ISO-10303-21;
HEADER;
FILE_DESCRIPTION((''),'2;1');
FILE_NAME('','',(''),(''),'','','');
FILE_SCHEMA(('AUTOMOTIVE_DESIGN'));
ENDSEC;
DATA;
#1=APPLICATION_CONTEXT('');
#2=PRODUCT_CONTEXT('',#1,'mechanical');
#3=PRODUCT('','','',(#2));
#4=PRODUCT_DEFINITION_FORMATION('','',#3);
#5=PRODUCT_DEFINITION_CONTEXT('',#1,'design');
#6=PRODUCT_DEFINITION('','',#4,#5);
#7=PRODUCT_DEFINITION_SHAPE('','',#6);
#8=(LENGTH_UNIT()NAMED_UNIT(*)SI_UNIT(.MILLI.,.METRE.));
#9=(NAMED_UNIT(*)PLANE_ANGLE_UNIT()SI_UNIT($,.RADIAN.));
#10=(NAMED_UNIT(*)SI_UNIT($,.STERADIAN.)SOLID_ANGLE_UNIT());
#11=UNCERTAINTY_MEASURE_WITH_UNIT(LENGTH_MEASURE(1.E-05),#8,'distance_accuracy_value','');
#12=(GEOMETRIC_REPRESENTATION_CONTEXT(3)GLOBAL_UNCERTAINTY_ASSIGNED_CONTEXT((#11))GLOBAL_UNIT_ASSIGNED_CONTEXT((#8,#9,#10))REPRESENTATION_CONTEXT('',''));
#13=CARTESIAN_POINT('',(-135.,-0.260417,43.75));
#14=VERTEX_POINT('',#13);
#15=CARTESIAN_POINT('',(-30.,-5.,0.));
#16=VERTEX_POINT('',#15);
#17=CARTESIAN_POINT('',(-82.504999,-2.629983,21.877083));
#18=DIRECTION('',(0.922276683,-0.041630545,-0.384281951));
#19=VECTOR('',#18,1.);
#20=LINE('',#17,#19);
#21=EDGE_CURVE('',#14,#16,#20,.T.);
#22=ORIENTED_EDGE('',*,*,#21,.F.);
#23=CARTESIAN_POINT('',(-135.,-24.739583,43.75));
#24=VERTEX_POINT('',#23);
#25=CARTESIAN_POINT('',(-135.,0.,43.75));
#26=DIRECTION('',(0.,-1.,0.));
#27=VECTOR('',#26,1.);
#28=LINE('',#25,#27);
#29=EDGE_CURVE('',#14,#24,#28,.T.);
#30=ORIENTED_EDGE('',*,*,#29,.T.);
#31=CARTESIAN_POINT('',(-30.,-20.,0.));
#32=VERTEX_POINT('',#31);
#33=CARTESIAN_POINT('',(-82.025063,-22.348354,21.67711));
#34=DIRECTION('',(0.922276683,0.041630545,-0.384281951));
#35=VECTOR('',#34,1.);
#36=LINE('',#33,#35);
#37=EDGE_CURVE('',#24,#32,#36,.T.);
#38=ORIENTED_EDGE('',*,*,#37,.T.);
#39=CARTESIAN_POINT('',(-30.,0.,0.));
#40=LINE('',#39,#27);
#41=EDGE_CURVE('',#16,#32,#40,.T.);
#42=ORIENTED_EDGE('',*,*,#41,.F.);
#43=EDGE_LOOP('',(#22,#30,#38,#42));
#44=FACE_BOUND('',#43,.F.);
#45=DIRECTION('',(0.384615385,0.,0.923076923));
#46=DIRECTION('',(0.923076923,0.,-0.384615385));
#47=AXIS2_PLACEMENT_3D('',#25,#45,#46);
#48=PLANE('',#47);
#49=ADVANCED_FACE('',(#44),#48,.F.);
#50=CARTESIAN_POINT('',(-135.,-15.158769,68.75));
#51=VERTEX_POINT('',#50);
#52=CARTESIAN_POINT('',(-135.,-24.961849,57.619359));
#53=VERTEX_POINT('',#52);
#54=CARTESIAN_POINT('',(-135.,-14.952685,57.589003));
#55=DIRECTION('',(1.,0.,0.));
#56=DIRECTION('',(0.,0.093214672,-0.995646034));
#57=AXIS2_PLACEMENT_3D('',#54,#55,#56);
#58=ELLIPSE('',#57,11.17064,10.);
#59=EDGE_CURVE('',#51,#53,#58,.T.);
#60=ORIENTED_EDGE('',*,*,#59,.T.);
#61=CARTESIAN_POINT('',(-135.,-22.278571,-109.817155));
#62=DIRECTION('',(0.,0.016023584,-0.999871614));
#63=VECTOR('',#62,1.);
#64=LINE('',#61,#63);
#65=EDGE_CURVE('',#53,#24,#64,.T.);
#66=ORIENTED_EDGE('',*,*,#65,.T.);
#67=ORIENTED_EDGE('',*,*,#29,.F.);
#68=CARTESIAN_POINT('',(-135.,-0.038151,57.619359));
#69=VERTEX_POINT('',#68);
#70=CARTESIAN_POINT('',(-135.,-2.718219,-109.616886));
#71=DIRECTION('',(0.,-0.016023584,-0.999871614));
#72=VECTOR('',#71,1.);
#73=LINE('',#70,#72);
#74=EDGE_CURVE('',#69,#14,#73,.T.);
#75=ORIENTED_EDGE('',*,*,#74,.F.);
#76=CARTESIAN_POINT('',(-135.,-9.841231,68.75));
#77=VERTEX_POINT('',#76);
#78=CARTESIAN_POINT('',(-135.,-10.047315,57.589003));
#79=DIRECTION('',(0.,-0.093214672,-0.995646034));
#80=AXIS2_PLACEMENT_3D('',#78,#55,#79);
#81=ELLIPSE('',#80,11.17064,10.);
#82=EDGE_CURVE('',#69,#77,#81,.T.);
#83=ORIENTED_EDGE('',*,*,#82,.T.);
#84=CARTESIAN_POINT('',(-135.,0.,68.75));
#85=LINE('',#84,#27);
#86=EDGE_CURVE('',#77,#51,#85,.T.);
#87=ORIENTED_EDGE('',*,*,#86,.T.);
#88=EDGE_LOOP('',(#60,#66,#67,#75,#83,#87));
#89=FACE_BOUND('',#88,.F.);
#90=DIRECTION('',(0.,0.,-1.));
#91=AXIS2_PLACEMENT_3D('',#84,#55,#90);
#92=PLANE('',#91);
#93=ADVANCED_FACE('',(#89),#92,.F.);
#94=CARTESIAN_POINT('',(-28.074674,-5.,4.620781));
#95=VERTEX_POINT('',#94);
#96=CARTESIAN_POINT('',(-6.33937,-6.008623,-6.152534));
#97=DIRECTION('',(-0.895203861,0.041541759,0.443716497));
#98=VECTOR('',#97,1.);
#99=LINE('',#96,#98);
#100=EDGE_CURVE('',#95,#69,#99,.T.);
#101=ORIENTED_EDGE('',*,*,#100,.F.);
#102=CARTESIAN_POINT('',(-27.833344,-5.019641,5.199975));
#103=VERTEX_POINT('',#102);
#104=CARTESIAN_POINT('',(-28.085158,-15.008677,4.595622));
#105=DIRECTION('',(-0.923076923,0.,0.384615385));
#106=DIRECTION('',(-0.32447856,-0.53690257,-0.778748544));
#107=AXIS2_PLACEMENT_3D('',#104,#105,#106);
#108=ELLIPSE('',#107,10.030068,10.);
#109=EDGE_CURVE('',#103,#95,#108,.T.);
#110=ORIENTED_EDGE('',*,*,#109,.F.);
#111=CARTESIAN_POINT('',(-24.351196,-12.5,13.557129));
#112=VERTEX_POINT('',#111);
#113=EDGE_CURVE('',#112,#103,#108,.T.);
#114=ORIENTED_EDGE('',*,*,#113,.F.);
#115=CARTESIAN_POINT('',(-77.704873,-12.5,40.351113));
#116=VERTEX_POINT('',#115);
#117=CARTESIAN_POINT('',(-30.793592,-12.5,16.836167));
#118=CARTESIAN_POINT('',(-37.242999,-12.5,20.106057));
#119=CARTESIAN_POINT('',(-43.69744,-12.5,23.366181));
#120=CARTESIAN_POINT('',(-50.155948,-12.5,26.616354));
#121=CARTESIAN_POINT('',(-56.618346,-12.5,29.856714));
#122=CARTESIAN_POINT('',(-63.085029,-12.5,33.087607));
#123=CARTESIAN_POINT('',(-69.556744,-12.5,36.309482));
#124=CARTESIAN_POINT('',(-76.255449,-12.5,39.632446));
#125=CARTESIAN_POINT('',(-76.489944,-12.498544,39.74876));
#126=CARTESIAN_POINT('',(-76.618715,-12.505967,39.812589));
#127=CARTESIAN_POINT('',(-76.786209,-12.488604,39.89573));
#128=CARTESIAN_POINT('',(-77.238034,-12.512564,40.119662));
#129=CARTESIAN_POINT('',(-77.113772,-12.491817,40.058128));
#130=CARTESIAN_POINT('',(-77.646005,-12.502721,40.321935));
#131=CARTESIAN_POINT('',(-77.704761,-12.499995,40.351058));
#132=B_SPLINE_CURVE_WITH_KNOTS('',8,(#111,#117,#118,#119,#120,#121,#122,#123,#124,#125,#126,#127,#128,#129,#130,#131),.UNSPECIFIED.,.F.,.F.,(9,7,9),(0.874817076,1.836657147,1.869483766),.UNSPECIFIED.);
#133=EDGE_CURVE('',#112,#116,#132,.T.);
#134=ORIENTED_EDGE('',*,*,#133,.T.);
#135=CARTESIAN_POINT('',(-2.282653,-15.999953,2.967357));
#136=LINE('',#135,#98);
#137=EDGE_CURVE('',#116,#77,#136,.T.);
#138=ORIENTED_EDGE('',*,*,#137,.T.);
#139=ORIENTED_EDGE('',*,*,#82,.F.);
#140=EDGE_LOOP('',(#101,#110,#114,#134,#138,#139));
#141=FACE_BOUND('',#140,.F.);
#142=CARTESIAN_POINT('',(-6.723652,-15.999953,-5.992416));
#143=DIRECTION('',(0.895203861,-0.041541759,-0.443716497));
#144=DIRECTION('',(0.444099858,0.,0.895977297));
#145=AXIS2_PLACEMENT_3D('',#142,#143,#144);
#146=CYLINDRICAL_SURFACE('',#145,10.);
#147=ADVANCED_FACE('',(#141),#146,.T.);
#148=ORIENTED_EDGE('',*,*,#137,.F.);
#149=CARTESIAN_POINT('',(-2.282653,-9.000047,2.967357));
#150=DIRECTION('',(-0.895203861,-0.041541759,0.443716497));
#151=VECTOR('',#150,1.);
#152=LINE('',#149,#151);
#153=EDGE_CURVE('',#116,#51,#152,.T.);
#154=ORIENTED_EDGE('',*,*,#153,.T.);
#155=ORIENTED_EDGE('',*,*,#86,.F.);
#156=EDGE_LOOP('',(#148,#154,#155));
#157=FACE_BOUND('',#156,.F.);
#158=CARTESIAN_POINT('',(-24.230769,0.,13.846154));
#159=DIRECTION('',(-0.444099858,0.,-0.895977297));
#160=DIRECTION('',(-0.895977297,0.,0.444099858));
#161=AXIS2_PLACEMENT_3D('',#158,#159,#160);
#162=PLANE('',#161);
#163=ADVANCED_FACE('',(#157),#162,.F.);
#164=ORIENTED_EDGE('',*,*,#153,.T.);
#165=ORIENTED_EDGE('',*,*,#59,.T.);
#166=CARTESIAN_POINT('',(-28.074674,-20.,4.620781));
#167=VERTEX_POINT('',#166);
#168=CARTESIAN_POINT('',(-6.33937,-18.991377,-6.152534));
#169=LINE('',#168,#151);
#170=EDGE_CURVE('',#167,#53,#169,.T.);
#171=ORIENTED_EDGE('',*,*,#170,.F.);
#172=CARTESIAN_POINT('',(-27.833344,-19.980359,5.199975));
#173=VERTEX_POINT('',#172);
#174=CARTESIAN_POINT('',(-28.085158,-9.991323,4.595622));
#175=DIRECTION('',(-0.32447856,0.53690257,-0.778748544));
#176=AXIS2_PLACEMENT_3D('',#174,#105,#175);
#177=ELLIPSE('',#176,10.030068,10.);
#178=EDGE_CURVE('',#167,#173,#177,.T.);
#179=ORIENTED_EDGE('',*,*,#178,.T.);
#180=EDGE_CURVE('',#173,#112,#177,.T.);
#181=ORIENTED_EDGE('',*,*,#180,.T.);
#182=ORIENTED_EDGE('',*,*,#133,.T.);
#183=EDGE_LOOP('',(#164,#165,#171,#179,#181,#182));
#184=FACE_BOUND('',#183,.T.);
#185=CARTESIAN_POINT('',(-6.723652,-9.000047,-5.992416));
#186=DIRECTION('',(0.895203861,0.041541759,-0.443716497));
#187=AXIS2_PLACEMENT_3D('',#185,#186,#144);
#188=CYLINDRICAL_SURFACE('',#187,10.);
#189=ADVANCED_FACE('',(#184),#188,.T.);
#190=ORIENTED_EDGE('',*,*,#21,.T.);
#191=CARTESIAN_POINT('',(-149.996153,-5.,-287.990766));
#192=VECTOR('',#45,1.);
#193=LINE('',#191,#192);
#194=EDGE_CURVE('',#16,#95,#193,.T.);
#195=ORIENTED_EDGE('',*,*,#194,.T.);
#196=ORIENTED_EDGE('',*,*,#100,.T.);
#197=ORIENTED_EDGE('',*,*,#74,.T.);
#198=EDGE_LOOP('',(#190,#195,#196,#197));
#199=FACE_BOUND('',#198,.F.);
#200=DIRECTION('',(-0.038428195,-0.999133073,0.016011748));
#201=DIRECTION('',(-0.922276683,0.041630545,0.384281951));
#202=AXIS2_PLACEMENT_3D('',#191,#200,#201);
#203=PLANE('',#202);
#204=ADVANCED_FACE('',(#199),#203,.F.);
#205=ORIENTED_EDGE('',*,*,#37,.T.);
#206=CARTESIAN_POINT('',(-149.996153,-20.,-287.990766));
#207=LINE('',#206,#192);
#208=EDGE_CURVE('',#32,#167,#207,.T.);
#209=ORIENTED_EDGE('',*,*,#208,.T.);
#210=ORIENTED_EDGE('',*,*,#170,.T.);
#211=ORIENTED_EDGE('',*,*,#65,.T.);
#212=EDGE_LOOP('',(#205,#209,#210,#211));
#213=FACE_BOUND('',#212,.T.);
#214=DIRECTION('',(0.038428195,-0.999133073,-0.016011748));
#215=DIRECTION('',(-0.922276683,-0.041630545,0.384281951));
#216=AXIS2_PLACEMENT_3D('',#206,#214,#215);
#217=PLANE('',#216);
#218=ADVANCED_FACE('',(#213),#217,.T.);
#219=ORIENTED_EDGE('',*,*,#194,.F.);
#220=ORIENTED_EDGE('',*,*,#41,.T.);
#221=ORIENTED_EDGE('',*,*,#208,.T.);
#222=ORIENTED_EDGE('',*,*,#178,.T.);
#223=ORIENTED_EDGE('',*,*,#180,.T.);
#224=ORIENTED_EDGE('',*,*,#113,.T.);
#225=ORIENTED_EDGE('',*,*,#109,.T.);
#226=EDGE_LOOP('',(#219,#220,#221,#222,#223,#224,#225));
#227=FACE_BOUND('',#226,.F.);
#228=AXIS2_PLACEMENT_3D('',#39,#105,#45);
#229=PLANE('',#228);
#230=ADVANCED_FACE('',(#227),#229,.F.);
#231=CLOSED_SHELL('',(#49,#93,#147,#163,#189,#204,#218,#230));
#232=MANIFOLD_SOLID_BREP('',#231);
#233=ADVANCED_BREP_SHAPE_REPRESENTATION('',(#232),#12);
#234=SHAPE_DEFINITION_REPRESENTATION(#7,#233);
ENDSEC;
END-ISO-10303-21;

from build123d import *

# Parameters (mm, degrees)
F1_DEPTH     = 25
F2_T1_DEPTH  = 638.9799936737
F3_T1_DEPTH  = 170.2250104198
F3_T3_DEPTH  = 170.2250104198
F3_T8_DEPTH  = 61.8334709535
F3_S9_R      = 10
F3_T10_DEPTH = 33
F3_T14_DEPTH = 61.8334709535
F3_S15_R     = 10
F3_T16_DEPTH = 33


# Not quite as in the source:
# - a fillet or chamfer that OpenCascade refuses, or shapes differently, is made with other operations: its cross-section is extruded or revolved along the edge and cut away or added


with BuildPart() as f1:
    # F0 (on Front) → F1 (new body)
    with BuildSketch(Plane.XZ):
        Polygon((-135, 68.75), (-135, 43.75), (-30, 0), (-24.2307692308, 13.8461538462), align=None)
    extrude(amount=F1_DEPTH)

    # F2: chamfer of 5 x 120 on 2 edges, made by hand

    # F2_s2 → F2_t1 (cut)
    with BuildSketch(Plane(origin=(-124.434022452, 0, -298.6416538849), x_dir=(0, 1, 0), z_dir=(0.3846153846, 0, 0.9230769231))):
        Polygon((-5, 27.6923076923), (0, 147.6923076923), (0, 27.6923076923), align=None)
        Polygon((-20, 27.6923076923), (-25, 147.6923076923), (-25, 27.6923076923), align=None)
    extrude(amount=F2_T1_DEPTH, mode=Mode.SUBTRACT)

    # F3: fillet of radius 10 on 3 edges, made by hand

    # F3_s2 → F3_t1 (cut)
    with BuildSketch(Plane(origin=(-3.3426758621, -0.1551162157, 1.6568297893), x_dir=(0.0463549196, -0.9989250329, 0), z_dir=(-0.8952038609, -0.041541759, 0.443716497))):
        with BuildLine():
            ThreePointArc((8.8845597759, 1.4623687793), (15.8844108663, -1.6017037775), (18.6771013822, -8.7141812364))
            Line((18.6771013822, -8.7141812364), (18.8552852991, 1.2570657903))
            Line((18.8552852991, 1.2570657903), (8.8845597759, 1.4623687793))
        make_face()
    extrude(amount=F3_T1_DEPTH, mode=Mode.SUBTRACT)

    # F3_s4 → F3_t3 (cut)
    with BuildSketch(Plane(origin=(-2.4129672855, 0.1119732721, 1.1960106944), x_dir=(-0.0463549196, -0.9989250329, 0), z_dir=(-0.8952038609, 0.041541759, 0.443716497))):
        with BuildLine():
            ThreePointArc((16.0885660475, 1.976579843), (9.0887149571, -1.0874927139), (6.2960244412, -8.1999701727))
            Line((6.2960244412, -8.1999701727), (6.1178405244, 1.7712768539))
            Line((6.1178405244, 1.7712768539), (16.0885660475, 1.976579843))
        make_face()
    extrude(amount=F3_T3_DEPTH, mode=Mode.SUBTRACT)


with BuildPart() as f3_tool6:
    # F3_s7 → F3_t8 (new body)
    with BuildSketch(Plane.XZ.offset(-18.4167354767)):
        with BuildLine():
            ThreePointArc((-32.6231145704, 18.005901406), (-27.6978305819, 12.5493770531), (-27.8333439195, 5.1999745932))
            Line((-27.8333439195, 5.1999745932), (-24.2307692308, 13.8461538462))
            Line((-24.2307692308, 13.8461538462), (-32.6231145704, 18.005901406))
        make_face()
    extrude(amount=F3_T8_DEPTH)

    # F3_s9 → F3_t10 (cut, symmetric)
    with BuildSketch(Plane(origin=(-27.8408400733, -1.2919487057, 13.7995830572), x_dir=(-0.0463549196, 0.9989250329, 0), z_dir=(0.8952038609, 0.041541759, -0.443716497))):
        with Locations((-8.6786976438, -8.5355120353)):
            Circle(F3_S9_R)
    extrude(amount=F3_T10_DEPTH, both=True, mode=Mode.SUBTRACT)


with BuildPart() as f1_1:
    add(f1.part)

    # F3_t5: cut F3_tool6
    add(f3_tool6.part, mode=Mode.SUBTRACT)


with BuildPart() as f3_tool12:
    # F3_s13 → F3_t14 (new body)
    with BuildSketch(Plane.XZ.offset(-18.4167354767)):
        with BuildLine():
            ThreePointArc((-32.6231145704, 18.005901406), (-27.6978305819, 12.5493770531), (-27.8333439195, 5.1999745932))
            Line((-27.8333439195, 5.1999745932), (-24.2307692308, 13.8461538462))
            Line((-24.2307692308, 13.8461538462), (-32.6231145704, 18.005901406))
        make_face()
    extrude(amount=F3_T14_DEPTH)

    # F3_s15 → F3_t16 (cut, symmetric)
    with BuildSketch(Plane(origin=(-26.9456362125, 1.2504069466, 13.3558665602), x_dir=(0.0463549196, 0.9989250329, 0), z_dir=(0.8952038609, -0.041541759, -0.443716497))):
        with Locations((-16.2944281796, -8.0213009716)):
            Circle(F3_S15_R)
    extrude(amount=F3_T16_DEPTH, both=True, mode=Mode.SUBTRACT)


with BuildPart() as f1_2:
    add(f1_1.part)

    # F3_t11: cut F3_tool12
    add(f3_tool12.part, mode=Mode.SUBTRACT)


solid = f1_2.part
